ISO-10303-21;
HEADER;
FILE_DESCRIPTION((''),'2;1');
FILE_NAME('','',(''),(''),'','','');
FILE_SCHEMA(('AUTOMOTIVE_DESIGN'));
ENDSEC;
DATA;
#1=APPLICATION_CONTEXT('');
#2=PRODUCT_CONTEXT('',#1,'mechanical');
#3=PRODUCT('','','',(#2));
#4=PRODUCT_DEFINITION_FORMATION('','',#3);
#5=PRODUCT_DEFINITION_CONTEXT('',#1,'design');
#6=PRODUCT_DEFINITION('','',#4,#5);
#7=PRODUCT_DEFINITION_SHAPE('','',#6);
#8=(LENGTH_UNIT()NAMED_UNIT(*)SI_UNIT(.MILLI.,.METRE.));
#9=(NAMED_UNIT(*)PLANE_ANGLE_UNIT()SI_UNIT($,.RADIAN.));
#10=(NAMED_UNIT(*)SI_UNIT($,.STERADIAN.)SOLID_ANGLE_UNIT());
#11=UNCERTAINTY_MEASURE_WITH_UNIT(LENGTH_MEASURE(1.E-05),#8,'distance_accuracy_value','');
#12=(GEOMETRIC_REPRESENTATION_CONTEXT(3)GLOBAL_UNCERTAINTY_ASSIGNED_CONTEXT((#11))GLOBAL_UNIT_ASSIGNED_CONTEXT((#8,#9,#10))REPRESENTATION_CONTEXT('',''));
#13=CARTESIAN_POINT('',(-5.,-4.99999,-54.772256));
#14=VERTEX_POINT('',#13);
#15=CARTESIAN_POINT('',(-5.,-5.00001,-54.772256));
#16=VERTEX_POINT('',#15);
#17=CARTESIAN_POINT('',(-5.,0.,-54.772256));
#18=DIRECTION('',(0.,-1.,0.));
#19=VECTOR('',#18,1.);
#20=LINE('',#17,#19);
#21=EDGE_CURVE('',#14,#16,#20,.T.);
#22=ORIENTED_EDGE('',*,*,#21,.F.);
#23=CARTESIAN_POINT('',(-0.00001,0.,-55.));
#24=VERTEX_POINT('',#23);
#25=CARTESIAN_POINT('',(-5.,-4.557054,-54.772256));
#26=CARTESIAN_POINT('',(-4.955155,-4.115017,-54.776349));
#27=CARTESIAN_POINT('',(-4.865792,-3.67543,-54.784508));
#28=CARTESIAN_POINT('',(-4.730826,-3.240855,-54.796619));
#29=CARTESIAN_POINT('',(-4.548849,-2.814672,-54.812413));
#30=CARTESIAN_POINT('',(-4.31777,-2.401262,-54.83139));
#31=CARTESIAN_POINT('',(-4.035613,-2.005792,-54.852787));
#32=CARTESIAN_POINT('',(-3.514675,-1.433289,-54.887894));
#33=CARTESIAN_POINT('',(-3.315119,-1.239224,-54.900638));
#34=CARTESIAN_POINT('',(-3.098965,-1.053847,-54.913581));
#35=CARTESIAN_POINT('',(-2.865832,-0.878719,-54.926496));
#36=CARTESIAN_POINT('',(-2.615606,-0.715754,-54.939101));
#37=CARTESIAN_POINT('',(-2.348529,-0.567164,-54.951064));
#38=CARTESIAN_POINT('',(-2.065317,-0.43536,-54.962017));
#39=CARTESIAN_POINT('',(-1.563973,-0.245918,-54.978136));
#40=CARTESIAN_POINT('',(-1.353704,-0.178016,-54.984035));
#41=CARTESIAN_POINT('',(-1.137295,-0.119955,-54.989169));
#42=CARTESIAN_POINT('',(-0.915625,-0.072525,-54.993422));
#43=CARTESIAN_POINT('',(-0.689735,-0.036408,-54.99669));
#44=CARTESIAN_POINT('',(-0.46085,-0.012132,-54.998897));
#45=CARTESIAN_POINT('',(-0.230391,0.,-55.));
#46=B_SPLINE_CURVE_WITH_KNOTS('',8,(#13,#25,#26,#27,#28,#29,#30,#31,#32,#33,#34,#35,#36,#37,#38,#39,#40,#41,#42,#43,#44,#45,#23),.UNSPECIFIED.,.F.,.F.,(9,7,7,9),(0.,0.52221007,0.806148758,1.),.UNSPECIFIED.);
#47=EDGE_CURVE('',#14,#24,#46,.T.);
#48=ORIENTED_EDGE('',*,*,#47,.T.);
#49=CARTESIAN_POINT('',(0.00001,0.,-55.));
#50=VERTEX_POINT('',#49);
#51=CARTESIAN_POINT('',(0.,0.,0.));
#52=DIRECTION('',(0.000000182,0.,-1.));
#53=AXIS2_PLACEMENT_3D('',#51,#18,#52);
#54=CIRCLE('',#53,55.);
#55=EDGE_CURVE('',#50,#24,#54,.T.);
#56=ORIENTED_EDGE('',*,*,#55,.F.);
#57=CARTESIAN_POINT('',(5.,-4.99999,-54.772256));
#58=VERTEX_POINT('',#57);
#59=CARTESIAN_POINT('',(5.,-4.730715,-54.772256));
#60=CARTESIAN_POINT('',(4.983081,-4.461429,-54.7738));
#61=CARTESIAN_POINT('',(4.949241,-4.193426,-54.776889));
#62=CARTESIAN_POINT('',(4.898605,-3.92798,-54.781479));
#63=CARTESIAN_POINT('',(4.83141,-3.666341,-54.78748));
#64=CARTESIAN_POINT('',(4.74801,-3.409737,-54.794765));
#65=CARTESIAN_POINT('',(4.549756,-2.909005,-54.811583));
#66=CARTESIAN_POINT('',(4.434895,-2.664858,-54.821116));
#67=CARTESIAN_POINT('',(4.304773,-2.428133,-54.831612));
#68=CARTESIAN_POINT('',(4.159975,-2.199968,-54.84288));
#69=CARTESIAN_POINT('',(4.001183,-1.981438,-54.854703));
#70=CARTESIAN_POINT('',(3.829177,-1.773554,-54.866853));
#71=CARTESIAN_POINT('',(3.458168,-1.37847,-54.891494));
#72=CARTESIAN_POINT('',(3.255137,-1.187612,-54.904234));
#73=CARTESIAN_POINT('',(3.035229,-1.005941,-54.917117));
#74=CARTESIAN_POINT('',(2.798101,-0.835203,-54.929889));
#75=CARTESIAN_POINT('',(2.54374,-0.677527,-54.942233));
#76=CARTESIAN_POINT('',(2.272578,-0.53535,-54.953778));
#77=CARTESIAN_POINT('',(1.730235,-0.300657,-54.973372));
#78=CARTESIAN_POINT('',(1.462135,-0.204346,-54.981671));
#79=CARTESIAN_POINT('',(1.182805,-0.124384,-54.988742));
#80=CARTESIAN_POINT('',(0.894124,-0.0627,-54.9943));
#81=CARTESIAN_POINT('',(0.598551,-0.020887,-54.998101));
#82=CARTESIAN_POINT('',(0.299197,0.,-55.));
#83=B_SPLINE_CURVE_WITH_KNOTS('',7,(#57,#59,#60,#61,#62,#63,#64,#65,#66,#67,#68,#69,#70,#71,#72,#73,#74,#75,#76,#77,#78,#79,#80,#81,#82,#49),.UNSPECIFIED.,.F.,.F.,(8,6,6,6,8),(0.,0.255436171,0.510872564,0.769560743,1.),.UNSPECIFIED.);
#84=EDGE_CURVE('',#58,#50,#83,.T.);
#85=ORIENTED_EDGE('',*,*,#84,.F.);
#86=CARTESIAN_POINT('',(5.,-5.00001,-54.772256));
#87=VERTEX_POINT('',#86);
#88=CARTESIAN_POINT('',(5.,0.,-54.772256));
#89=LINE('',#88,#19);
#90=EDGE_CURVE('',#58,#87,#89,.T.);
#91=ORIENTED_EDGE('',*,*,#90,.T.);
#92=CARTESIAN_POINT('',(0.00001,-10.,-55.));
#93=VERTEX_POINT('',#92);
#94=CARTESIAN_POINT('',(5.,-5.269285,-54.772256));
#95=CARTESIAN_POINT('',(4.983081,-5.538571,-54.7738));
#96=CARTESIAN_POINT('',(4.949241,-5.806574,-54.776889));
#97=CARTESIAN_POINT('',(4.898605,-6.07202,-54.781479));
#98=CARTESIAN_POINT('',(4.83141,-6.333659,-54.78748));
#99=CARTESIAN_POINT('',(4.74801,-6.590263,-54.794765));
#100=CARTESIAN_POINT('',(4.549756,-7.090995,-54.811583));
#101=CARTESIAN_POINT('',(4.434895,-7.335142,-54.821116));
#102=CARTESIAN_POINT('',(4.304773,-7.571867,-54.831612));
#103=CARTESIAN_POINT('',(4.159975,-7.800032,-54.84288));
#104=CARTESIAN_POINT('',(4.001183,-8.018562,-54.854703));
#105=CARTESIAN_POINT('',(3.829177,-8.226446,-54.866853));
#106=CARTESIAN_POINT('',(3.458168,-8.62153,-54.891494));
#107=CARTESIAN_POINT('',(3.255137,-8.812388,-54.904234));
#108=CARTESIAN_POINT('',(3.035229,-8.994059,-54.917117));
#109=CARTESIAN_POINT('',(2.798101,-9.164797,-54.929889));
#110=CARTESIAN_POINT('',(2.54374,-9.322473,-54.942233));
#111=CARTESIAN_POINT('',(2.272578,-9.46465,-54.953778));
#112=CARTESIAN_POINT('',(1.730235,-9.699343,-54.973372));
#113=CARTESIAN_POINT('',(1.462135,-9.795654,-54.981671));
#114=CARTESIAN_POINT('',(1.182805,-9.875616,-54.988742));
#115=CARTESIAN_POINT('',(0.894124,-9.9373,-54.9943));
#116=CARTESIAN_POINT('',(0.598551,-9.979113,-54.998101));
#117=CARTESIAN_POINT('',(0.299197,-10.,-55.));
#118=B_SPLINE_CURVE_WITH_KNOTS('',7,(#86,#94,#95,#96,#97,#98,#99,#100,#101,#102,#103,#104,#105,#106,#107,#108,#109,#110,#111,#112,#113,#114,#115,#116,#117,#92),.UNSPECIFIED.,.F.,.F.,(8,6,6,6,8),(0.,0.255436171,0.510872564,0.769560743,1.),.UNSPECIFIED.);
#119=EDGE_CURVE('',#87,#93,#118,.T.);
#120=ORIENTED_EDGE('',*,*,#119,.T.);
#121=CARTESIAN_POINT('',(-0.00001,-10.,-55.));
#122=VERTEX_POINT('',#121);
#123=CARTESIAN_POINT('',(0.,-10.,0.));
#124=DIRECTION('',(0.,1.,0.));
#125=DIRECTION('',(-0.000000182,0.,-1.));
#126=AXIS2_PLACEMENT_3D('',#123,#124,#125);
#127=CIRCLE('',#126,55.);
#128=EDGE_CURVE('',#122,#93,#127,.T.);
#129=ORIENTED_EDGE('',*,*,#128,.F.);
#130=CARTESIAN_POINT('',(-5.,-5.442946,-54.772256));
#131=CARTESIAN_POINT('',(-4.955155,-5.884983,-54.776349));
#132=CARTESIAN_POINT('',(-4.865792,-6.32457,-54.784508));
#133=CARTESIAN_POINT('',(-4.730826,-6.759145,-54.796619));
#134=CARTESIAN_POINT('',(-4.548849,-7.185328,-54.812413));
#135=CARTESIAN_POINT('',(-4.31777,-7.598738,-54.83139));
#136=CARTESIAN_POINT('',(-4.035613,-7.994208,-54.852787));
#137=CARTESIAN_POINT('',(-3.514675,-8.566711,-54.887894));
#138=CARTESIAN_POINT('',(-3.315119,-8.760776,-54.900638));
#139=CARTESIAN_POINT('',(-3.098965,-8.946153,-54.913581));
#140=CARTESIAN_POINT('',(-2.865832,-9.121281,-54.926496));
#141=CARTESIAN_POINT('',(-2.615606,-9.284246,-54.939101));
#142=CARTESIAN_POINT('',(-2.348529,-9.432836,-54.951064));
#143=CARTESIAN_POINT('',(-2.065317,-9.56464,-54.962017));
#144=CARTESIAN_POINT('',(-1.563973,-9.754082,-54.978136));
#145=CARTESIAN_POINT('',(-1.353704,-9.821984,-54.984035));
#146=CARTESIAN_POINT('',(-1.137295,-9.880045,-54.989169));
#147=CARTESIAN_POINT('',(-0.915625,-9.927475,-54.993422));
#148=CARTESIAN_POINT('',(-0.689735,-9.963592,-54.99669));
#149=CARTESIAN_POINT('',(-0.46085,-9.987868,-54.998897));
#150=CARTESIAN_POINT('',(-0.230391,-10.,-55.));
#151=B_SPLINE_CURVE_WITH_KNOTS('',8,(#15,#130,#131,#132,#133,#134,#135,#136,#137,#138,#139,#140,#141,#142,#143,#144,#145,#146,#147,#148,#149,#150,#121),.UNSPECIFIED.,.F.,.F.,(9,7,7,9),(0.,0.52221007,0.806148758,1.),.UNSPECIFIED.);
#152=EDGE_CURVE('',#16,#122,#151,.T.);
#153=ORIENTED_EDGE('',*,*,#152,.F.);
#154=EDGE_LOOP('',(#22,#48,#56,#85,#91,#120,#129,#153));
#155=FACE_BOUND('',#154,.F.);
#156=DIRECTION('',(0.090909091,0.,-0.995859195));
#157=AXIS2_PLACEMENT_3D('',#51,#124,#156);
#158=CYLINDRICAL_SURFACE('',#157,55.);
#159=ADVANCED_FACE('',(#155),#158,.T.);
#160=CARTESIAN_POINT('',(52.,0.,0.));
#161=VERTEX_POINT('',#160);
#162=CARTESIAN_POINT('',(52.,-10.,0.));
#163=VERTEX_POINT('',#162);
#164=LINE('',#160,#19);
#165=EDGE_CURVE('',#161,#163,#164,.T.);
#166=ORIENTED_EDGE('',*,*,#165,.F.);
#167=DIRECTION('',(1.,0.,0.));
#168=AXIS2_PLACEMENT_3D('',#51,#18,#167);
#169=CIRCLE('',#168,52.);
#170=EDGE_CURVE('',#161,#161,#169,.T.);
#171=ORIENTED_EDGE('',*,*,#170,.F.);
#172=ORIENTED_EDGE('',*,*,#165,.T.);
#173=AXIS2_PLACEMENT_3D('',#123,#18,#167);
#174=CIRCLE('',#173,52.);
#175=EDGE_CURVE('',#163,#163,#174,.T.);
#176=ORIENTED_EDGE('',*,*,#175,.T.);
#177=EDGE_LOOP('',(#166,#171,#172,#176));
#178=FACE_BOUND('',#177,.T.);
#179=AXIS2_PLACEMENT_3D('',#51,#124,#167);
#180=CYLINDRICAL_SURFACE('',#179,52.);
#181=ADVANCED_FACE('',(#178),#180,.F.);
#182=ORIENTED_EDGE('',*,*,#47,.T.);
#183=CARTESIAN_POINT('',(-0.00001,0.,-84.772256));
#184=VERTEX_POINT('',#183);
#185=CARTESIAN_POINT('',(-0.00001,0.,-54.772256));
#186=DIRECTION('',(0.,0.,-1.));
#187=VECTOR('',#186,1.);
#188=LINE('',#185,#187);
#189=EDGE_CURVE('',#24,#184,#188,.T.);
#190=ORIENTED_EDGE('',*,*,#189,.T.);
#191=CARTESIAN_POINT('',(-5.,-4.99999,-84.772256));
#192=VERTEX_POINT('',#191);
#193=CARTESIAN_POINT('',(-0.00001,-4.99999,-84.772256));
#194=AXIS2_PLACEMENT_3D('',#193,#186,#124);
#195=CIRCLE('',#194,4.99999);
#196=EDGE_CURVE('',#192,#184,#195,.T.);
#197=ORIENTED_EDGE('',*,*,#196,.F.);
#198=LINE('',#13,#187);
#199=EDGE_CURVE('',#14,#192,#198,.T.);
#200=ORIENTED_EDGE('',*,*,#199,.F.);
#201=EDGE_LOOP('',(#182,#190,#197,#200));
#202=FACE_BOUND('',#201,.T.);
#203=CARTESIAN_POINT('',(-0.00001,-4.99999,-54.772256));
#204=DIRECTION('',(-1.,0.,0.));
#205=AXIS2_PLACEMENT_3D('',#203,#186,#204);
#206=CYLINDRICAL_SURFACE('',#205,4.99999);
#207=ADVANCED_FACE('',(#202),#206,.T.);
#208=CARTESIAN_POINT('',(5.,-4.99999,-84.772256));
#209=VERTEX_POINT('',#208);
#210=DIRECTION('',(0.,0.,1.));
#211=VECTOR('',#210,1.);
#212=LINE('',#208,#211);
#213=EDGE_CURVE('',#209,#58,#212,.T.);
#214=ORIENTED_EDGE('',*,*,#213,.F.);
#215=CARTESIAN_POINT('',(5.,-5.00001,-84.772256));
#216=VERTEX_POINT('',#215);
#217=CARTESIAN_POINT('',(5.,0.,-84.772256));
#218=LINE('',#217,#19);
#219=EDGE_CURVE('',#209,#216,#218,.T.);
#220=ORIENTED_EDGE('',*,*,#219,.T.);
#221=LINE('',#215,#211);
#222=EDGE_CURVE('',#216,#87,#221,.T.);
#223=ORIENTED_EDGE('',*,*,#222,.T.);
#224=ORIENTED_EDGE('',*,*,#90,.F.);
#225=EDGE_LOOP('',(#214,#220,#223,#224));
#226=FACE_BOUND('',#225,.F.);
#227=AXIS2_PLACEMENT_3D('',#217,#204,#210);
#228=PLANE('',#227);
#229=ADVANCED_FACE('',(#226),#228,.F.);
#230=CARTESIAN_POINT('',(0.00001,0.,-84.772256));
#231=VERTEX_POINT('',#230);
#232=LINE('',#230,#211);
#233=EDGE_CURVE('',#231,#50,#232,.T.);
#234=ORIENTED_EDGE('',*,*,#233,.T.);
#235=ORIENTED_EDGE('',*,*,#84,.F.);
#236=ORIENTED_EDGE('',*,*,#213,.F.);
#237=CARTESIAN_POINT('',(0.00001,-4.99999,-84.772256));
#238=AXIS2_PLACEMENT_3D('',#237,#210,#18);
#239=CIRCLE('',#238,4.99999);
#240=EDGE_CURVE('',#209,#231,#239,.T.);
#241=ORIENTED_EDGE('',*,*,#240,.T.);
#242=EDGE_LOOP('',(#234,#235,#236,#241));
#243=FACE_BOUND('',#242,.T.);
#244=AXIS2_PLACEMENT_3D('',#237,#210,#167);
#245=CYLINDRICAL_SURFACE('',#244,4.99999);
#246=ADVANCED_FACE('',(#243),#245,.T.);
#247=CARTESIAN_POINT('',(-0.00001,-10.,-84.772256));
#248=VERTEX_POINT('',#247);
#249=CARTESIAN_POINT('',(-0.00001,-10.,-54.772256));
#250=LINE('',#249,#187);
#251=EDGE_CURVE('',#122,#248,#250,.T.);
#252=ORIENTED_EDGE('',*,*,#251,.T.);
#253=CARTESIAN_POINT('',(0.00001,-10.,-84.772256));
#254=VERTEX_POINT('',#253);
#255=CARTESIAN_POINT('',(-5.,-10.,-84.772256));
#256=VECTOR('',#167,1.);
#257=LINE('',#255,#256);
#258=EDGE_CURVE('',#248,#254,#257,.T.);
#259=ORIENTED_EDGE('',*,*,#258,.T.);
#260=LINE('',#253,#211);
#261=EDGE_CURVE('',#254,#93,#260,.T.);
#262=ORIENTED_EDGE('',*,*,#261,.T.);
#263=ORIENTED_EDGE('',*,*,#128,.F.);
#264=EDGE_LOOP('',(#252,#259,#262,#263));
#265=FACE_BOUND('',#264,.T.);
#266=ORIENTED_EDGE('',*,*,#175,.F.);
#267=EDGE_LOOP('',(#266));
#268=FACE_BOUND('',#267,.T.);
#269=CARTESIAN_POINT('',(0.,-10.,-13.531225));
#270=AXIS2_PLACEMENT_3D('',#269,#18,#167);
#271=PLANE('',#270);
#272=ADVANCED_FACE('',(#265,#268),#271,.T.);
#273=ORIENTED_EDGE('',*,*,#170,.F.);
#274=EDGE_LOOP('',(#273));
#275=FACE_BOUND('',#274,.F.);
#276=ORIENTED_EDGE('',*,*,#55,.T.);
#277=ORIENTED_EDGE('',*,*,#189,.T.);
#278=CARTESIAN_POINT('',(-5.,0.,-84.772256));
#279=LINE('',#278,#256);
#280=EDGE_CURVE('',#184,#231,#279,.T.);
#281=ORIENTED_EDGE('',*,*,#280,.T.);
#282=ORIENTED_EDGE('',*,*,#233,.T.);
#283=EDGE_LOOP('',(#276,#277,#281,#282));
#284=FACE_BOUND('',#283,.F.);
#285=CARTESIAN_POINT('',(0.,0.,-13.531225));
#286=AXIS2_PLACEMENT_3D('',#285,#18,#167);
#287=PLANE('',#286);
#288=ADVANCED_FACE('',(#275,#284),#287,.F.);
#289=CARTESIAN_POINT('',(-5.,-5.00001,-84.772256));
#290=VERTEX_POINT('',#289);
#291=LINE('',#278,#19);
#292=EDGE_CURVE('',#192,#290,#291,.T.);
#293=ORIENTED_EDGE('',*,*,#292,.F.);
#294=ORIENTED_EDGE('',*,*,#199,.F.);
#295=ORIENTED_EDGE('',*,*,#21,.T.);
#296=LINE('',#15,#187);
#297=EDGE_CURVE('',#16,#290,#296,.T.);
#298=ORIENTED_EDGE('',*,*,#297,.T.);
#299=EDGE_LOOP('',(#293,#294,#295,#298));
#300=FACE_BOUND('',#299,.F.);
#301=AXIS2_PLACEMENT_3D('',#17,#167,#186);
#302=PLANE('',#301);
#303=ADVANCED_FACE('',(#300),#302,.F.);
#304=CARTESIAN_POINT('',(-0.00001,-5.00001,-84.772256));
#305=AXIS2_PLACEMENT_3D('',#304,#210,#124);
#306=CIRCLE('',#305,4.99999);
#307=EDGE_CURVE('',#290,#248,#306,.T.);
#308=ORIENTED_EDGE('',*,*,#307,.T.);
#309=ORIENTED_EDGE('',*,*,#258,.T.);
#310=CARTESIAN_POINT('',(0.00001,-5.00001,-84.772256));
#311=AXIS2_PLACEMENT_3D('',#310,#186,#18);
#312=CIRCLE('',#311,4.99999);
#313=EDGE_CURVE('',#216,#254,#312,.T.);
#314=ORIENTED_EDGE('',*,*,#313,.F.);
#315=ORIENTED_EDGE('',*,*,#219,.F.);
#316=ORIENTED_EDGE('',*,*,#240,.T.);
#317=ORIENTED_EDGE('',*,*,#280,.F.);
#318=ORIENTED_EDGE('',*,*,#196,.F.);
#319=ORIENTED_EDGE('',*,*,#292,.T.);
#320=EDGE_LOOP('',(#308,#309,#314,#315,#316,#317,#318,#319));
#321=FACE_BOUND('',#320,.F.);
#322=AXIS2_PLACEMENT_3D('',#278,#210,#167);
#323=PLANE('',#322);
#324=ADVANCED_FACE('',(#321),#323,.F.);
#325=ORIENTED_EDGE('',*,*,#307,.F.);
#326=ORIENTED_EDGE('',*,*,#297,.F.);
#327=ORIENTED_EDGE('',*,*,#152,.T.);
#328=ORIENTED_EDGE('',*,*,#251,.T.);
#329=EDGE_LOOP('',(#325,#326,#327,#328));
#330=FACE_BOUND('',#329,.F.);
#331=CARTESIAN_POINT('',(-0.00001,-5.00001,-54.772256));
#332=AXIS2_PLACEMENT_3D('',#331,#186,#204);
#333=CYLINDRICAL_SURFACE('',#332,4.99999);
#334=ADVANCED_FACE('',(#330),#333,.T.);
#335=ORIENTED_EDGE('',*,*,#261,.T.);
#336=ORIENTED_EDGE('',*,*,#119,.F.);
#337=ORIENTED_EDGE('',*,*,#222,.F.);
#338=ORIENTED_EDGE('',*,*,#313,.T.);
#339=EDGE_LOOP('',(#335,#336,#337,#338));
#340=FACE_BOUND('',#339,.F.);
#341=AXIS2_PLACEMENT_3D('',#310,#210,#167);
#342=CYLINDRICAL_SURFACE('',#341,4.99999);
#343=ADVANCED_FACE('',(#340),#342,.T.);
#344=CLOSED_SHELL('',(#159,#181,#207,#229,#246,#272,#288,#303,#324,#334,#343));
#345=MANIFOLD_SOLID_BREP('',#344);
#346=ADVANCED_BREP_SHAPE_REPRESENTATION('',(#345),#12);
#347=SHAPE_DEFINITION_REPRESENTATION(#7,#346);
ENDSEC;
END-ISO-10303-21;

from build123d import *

# Parameters (mm, degrees)
F0_R     = 52
F1_DEPTH = 10
F2_R     = 4.99999


# Not quite as in the source:
# - a fillet or chamfer is up to 0.001 mm smaller than in the source, because OpenCascade refuses the exact size


with BuildPart() as f1:
    # F0 (on Front) → F1 (new body)
    with BuildSketch(Plane.XZ):
        with BuildLine():
            Line((5, -84.7722557505), (5, -54.7722557505))
            ThreePointArc((5, -54.7722557505), (0, 55), (-5, -54.7722557505))
            Line((-5, -54.7722557505), (-5, -84.7722557505))
            Line((-5, -84.7722557505), (5, -84.7722557505))
        make_face()
        Circle(F0_R, mode=Mode.SUBTRACT)
    extrude(amount=F1_DEPTH)

    # F2 (radius 5 in the source; OpenCascade refuses exactly that, so slightly less here)
    f2_edges = [f1.edges().sort_by_distance(p)[0] for p in [
        (5, -10, -69.772256),
        (-5, -10, -69.772256),
        (-5, 0, -69.772256),
        (5, 0, -69.772256),
    ]]
    fillet(f2_edges, radius=F2_R)


solid = f1.part
